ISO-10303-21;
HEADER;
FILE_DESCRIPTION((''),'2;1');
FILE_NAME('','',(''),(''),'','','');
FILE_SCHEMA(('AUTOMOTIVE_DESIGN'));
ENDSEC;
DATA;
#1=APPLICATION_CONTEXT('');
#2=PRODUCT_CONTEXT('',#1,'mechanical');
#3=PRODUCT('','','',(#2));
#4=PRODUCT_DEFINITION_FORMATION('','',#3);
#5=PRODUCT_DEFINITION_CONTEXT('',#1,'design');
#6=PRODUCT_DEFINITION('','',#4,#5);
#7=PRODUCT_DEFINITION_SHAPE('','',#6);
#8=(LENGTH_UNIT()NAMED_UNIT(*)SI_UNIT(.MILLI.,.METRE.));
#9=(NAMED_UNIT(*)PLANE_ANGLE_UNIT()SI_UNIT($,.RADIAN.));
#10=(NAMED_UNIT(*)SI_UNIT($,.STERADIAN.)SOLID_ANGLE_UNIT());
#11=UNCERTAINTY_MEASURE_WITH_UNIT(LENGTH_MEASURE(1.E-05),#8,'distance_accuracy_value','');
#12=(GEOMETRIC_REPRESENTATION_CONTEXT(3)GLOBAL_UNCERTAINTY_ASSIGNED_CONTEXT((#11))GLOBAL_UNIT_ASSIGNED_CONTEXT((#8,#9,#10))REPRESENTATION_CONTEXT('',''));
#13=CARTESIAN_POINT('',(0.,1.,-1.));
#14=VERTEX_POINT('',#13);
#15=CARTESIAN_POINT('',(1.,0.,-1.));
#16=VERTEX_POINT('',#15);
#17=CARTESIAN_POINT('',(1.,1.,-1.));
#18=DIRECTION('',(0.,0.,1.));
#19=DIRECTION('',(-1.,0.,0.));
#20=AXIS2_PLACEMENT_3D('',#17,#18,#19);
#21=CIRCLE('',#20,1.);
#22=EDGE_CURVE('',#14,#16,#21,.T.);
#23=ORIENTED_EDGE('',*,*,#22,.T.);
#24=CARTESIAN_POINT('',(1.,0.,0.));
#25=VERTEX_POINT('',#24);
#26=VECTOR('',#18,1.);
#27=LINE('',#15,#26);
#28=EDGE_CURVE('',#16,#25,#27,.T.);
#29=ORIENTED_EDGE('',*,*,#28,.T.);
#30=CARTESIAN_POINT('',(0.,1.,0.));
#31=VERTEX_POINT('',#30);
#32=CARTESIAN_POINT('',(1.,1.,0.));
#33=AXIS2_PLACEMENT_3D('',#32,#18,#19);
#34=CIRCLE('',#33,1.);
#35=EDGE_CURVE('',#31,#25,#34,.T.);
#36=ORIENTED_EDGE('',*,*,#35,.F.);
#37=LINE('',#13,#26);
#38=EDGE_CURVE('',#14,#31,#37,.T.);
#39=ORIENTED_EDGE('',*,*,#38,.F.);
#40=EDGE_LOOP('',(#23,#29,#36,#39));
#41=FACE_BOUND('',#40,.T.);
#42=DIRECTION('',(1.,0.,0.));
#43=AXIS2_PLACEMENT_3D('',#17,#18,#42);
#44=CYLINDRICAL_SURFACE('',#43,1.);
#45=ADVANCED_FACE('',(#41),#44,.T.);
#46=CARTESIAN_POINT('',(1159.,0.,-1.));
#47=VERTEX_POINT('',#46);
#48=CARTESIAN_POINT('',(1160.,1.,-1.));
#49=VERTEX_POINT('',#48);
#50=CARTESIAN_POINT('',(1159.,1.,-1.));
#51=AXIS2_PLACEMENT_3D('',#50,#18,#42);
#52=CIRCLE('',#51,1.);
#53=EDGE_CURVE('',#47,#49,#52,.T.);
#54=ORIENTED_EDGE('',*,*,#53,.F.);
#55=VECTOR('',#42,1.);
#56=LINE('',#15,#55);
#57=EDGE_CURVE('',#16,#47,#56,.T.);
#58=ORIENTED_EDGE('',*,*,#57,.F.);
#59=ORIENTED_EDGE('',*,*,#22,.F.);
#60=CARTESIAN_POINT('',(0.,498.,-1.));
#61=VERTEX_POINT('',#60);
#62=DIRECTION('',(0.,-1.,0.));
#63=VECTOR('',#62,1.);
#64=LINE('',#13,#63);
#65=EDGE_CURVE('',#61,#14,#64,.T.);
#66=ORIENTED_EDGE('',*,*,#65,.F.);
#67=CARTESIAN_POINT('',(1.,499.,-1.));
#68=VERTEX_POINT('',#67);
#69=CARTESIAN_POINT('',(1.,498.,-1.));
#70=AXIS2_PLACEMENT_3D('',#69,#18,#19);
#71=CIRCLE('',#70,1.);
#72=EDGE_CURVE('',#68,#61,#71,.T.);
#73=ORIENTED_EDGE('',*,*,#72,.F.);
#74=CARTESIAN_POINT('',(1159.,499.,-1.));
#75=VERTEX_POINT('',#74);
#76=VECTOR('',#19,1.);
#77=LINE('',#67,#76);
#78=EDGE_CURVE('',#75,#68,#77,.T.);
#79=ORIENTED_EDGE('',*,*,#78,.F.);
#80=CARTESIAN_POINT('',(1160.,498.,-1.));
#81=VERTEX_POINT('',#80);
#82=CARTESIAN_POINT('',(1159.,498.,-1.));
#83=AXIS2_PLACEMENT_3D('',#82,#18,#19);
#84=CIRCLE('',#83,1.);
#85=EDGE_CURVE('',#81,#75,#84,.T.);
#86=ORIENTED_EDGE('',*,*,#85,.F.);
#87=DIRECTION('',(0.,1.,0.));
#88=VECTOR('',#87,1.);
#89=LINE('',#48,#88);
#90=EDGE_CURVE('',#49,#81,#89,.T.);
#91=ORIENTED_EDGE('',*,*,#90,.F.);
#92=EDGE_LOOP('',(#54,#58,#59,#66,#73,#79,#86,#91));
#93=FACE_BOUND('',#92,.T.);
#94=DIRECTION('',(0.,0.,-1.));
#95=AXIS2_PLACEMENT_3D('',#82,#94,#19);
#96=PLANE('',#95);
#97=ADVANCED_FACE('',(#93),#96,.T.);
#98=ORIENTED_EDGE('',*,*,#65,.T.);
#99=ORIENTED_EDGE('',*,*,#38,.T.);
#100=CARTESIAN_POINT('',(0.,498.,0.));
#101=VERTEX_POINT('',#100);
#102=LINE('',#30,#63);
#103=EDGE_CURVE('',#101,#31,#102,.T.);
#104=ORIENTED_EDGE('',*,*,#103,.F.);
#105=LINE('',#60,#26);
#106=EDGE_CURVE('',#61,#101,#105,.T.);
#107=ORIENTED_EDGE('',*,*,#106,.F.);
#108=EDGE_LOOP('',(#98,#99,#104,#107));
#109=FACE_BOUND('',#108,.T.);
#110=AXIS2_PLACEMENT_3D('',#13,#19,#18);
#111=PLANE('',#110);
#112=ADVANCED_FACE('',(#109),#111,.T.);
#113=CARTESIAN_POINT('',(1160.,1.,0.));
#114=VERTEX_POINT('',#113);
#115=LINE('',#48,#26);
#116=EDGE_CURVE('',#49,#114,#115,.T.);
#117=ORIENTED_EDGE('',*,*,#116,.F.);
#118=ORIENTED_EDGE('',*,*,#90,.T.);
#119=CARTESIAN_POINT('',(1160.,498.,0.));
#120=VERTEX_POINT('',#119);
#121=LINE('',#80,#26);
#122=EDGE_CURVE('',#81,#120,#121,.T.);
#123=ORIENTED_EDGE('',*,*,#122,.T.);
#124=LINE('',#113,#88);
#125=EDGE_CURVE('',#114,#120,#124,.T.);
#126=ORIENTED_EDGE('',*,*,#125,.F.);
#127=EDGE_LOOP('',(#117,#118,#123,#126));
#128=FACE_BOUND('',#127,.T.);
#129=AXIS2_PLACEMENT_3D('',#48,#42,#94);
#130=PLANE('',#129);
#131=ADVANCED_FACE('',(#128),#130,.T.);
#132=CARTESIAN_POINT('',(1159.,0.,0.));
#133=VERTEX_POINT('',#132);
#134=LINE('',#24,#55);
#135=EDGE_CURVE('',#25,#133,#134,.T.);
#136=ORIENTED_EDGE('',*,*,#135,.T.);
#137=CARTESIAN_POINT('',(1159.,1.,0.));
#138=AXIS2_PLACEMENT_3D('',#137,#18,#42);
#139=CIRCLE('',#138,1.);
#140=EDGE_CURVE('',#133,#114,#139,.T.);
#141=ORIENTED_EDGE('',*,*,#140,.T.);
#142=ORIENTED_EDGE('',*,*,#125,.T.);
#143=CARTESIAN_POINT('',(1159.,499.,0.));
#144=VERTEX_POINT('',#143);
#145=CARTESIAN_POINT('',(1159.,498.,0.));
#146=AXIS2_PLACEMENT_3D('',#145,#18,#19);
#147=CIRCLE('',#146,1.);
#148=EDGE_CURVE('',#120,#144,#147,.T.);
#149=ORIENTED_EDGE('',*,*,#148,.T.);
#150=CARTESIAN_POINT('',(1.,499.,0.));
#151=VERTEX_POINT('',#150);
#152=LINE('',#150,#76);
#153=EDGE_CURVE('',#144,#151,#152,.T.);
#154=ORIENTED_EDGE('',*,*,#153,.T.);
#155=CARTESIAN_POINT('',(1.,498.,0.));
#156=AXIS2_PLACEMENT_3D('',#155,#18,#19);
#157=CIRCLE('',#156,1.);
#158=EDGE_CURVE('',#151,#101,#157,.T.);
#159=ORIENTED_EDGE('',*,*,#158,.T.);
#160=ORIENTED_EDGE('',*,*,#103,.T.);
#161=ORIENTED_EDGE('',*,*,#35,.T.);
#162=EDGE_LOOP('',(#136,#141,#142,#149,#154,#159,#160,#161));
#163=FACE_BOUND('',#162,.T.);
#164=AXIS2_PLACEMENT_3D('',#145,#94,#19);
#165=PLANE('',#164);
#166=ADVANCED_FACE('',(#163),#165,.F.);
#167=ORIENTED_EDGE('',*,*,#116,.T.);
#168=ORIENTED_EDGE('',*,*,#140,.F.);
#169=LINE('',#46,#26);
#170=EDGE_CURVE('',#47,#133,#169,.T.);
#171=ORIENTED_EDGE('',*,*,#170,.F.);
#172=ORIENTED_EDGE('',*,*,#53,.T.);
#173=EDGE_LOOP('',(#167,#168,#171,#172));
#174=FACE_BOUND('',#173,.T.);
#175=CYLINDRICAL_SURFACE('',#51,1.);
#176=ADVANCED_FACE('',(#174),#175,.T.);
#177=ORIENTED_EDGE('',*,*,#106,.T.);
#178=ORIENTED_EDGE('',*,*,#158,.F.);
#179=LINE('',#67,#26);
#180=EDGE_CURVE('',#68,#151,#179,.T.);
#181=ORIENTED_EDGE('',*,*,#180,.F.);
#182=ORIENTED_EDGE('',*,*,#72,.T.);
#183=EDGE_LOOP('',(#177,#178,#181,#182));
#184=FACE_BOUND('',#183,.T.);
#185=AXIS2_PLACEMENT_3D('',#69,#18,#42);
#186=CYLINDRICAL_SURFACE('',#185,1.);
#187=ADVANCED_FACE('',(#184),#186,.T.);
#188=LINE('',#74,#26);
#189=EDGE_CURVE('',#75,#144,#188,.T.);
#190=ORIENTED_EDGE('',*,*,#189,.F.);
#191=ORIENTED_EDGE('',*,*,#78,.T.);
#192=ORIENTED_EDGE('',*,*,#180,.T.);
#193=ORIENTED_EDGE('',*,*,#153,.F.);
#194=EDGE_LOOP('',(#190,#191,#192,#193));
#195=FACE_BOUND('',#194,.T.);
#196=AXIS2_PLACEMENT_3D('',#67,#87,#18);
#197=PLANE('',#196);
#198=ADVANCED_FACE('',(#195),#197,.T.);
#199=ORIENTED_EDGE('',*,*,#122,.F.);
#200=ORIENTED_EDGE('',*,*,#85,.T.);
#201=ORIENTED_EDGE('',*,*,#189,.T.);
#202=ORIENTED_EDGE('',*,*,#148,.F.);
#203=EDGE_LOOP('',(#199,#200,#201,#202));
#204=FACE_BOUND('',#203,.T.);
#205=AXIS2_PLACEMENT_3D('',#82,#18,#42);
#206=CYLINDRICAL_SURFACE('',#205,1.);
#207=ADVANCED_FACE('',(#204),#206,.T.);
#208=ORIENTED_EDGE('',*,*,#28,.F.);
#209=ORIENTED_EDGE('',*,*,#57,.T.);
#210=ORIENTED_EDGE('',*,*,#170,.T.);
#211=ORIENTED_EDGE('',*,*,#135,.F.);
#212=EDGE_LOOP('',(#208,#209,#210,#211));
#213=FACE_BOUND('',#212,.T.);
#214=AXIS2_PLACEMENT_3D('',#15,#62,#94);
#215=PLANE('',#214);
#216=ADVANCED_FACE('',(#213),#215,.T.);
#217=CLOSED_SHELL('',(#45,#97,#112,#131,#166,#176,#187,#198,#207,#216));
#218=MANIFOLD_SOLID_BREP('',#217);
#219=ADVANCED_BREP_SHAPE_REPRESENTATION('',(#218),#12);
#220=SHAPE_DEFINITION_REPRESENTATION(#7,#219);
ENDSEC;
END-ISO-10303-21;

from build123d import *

# Parameters (mm, degrees)
BASE_FLANGE1_DEPTH = 1


# Sheet-metal steps are written as plain solids
with BuildPart() as part:
    # Sketch1 → Base-Flange1 (new body)
    with BuildSketch(Plane.XY):
        with BuildLine():
            Line((1, 0), (1159, 0))
            ThreePointArc((1159, 0), (1159.707106781, 0.292893219), (1160, 1))
            Line((1160, 1), (1160, 498))
            ThreePointArc((1160, 498), (1159.707106781, 498.707106781), (1159, 499))
            Line((1159, 499), (1, 499))
            ThreePointArc((1, 499), (0.292893219, 498.707106781), (0, 498))
            Line((0, 498), (0, 1))
            ThreePointArc((0, 1), (0.292893219, 0.292893219), (1, 0))
        make_face()
    extrude(amount=-BASE_FLANGE1_DEPTH)


solid = part.part
